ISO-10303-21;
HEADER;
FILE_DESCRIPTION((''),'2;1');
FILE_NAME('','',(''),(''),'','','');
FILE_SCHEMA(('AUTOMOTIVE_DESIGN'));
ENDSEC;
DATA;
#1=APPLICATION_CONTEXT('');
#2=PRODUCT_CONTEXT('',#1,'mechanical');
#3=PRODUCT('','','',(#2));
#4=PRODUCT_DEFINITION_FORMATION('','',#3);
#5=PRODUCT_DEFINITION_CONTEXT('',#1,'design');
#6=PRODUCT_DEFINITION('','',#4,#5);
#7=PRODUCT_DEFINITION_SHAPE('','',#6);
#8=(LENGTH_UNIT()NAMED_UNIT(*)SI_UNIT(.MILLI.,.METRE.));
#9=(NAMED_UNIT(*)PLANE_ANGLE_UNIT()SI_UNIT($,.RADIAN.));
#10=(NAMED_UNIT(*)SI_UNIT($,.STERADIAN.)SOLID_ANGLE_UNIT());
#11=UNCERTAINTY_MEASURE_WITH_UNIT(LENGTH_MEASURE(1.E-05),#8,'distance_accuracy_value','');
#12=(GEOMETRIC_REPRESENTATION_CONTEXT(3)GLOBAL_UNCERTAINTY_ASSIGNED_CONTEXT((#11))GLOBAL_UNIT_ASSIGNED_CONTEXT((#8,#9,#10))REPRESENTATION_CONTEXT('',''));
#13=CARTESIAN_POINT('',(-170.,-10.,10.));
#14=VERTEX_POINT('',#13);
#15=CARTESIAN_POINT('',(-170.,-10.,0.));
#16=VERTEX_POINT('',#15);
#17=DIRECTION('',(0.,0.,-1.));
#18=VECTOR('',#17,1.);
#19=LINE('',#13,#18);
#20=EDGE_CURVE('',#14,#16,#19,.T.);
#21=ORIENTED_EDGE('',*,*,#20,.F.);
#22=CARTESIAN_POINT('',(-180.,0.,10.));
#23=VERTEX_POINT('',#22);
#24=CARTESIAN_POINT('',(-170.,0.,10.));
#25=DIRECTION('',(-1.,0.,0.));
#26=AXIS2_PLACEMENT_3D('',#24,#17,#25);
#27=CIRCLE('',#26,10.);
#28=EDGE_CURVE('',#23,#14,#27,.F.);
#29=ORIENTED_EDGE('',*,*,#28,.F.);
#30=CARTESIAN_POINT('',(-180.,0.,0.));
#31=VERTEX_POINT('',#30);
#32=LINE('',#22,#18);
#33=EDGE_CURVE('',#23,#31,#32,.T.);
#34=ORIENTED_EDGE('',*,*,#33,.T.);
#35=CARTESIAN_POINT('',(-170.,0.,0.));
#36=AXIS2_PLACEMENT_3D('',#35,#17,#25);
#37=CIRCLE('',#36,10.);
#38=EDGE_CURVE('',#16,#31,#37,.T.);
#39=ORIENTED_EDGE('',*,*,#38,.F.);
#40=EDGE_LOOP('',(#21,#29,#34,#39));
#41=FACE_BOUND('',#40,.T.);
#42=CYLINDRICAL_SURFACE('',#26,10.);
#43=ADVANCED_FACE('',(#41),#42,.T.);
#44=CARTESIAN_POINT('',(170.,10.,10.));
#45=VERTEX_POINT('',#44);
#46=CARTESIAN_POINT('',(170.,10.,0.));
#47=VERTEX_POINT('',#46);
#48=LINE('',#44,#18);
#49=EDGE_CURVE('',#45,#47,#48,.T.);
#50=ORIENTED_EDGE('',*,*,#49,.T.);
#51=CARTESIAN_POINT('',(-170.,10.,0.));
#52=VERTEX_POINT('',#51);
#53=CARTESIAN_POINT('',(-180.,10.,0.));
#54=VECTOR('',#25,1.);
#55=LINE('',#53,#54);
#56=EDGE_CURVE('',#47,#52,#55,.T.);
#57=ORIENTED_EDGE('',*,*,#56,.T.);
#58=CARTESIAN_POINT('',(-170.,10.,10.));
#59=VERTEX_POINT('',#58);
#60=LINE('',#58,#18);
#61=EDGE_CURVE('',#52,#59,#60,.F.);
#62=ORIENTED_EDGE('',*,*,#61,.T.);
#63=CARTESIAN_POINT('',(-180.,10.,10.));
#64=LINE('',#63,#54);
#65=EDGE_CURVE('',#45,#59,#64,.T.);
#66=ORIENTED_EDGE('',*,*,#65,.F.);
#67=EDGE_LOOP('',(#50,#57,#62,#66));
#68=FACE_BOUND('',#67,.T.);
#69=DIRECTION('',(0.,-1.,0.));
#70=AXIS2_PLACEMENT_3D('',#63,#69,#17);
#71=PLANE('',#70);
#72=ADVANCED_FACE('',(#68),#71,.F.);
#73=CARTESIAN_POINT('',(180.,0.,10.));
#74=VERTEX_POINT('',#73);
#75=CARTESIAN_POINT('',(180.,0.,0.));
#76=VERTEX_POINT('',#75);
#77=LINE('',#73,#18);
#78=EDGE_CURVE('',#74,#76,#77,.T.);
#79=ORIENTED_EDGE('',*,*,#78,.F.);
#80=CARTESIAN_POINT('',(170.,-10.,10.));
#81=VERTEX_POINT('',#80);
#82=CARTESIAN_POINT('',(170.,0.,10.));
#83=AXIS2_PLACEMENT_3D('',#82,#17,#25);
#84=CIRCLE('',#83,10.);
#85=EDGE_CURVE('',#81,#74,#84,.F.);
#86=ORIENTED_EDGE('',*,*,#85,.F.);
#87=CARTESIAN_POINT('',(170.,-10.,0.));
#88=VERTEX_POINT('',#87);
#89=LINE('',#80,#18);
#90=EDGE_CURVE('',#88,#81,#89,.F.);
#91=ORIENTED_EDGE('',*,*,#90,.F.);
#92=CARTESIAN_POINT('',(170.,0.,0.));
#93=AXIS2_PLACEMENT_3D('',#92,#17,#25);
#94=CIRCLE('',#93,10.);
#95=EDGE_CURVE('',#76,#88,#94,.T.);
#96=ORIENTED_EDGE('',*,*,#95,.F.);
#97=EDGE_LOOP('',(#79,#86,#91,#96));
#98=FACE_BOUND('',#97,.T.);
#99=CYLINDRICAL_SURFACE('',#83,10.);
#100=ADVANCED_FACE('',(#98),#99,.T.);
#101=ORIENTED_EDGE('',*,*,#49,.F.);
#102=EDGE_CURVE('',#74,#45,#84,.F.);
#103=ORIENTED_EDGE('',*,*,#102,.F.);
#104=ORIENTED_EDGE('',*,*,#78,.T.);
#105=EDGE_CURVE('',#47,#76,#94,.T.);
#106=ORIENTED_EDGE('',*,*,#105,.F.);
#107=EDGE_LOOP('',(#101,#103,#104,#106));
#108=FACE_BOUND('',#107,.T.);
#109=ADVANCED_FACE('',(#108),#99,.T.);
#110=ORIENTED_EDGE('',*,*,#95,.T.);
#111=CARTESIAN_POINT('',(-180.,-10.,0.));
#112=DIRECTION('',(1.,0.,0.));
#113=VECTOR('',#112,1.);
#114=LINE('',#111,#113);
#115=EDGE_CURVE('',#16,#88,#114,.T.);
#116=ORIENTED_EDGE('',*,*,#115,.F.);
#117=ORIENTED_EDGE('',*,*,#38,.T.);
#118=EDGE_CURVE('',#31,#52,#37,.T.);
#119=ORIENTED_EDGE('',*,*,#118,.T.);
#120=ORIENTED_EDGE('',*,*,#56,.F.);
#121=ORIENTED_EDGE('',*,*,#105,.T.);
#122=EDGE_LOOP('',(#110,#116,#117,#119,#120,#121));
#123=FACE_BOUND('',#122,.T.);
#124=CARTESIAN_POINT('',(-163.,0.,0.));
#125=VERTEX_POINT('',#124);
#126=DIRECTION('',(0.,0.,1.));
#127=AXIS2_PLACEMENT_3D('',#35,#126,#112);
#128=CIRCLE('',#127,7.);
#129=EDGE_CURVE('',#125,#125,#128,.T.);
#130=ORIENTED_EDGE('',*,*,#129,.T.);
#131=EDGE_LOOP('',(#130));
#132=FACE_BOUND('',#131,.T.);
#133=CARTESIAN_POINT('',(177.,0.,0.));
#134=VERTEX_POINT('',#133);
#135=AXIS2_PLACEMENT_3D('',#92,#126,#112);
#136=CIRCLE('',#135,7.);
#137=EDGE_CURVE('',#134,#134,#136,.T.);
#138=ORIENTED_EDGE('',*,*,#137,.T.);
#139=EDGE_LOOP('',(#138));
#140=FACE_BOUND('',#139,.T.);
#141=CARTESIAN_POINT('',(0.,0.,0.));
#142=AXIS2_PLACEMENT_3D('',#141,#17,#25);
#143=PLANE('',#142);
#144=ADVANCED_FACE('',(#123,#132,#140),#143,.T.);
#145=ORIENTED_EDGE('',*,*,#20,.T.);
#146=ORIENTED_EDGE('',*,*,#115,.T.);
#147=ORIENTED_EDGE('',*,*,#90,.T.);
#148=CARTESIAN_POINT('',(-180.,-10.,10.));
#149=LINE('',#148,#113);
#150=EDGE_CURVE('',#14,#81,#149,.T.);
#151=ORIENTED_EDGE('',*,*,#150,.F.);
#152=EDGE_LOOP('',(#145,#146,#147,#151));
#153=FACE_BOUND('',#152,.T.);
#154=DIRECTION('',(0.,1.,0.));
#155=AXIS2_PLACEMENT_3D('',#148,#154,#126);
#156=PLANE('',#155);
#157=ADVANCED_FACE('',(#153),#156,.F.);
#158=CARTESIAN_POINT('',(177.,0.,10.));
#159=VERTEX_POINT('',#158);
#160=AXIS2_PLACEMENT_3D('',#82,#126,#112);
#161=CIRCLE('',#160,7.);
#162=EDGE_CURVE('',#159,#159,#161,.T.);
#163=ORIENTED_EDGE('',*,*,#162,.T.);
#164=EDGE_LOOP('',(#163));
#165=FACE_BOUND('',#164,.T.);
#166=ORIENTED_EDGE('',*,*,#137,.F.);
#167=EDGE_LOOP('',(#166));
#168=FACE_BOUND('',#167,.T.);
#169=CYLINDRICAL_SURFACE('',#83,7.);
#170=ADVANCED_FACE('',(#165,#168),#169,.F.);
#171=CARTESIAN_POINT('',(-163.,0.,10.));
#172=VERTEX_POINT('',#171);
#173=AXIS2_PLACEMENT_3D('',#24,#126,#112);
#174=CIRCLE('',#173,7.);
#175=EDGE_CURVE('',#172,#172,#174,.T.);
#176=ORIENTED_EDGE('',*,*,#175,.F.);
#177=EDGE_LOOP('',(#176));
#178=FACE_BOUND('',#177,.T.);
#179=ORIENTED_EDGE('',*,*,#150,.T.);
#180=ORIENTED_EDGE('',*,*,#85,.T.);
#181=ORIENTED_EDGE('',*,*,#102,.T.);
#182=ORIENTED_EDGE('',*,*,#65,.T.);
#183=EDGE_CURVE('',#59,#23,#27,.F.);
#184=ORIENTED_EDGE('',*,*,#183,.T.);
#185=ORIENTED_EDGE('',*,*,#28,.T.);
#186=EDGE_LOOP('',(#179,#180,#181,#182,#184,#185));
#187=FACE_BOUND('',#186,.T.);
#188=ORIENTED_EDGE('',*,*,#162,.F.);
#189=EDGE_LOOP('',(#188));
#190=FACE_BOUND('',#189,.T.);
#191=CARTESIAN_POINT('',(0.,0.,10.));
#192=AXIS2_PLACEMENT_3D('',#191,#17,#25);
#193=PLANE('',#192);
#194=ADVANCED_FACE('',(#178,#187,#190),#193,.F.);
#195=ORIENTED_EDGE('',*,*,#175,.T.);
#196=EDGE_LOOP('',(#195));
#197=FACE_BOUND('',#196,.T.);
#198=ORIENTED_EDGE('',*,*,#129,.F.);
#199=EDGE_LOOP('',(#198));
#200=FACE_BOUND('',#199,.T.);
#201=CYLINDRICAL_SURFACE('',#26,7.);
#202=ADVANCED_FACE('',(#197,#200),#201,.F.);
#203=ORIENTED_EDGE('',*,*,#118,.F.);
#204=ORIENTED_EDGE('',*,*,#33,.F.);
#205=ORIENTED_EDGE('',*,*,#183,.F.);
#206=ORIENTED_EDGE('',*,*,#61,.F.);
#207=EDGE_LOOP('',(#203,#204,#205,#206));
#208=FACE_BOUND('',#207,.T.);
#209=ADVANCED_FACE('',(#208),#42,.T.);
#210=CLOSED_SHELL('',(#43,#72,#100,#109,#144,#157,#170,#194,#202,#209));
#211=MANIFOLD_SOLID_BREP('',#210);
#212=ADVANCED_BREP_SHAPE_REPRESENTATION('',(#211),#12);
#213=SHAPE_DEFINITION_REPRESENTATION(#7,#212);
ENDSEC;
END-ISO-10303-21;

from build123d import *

# Parameters (mm, degrees)
SKETCH_1_W      = 360
SKETCH_1_H      = 20
SKETCH_1_R      = 7
EXTRUDE_1_DEPTH = 10
FILLET_1_R      = 10


with BuildPart() as part:
    # 草图1 → 凸台-拉伸1 (new body)
    with BuildSketch(Plane.XY):
        Rectangle(SKETCH_1_W, SKETCH_1_H)
        with Locations((-170, 0)):
            Circle(SKETCH_1_R, mode=Mode.SUBTRACT)
        with Locations((170, 0)):
            Circle(SKETCH_1_R, mode=Mode.SUBTRACT)
    extrude(amount=EXTRUDE_1_DEPTH)

    # 圆角1
    fillet_1_edges = [part.edges().sort_by_distance(p)[0] for p in [
        (180, 10, 5),
        (180, -10, 5),
        (-180, -10, 5),
        (-180, 10, 5),
    ]]
    fillet(fillet_1_edges, radius=FILLET_1_R - 0.0001)  # a hair under: the kernel refuses the full size


solid = part.part
